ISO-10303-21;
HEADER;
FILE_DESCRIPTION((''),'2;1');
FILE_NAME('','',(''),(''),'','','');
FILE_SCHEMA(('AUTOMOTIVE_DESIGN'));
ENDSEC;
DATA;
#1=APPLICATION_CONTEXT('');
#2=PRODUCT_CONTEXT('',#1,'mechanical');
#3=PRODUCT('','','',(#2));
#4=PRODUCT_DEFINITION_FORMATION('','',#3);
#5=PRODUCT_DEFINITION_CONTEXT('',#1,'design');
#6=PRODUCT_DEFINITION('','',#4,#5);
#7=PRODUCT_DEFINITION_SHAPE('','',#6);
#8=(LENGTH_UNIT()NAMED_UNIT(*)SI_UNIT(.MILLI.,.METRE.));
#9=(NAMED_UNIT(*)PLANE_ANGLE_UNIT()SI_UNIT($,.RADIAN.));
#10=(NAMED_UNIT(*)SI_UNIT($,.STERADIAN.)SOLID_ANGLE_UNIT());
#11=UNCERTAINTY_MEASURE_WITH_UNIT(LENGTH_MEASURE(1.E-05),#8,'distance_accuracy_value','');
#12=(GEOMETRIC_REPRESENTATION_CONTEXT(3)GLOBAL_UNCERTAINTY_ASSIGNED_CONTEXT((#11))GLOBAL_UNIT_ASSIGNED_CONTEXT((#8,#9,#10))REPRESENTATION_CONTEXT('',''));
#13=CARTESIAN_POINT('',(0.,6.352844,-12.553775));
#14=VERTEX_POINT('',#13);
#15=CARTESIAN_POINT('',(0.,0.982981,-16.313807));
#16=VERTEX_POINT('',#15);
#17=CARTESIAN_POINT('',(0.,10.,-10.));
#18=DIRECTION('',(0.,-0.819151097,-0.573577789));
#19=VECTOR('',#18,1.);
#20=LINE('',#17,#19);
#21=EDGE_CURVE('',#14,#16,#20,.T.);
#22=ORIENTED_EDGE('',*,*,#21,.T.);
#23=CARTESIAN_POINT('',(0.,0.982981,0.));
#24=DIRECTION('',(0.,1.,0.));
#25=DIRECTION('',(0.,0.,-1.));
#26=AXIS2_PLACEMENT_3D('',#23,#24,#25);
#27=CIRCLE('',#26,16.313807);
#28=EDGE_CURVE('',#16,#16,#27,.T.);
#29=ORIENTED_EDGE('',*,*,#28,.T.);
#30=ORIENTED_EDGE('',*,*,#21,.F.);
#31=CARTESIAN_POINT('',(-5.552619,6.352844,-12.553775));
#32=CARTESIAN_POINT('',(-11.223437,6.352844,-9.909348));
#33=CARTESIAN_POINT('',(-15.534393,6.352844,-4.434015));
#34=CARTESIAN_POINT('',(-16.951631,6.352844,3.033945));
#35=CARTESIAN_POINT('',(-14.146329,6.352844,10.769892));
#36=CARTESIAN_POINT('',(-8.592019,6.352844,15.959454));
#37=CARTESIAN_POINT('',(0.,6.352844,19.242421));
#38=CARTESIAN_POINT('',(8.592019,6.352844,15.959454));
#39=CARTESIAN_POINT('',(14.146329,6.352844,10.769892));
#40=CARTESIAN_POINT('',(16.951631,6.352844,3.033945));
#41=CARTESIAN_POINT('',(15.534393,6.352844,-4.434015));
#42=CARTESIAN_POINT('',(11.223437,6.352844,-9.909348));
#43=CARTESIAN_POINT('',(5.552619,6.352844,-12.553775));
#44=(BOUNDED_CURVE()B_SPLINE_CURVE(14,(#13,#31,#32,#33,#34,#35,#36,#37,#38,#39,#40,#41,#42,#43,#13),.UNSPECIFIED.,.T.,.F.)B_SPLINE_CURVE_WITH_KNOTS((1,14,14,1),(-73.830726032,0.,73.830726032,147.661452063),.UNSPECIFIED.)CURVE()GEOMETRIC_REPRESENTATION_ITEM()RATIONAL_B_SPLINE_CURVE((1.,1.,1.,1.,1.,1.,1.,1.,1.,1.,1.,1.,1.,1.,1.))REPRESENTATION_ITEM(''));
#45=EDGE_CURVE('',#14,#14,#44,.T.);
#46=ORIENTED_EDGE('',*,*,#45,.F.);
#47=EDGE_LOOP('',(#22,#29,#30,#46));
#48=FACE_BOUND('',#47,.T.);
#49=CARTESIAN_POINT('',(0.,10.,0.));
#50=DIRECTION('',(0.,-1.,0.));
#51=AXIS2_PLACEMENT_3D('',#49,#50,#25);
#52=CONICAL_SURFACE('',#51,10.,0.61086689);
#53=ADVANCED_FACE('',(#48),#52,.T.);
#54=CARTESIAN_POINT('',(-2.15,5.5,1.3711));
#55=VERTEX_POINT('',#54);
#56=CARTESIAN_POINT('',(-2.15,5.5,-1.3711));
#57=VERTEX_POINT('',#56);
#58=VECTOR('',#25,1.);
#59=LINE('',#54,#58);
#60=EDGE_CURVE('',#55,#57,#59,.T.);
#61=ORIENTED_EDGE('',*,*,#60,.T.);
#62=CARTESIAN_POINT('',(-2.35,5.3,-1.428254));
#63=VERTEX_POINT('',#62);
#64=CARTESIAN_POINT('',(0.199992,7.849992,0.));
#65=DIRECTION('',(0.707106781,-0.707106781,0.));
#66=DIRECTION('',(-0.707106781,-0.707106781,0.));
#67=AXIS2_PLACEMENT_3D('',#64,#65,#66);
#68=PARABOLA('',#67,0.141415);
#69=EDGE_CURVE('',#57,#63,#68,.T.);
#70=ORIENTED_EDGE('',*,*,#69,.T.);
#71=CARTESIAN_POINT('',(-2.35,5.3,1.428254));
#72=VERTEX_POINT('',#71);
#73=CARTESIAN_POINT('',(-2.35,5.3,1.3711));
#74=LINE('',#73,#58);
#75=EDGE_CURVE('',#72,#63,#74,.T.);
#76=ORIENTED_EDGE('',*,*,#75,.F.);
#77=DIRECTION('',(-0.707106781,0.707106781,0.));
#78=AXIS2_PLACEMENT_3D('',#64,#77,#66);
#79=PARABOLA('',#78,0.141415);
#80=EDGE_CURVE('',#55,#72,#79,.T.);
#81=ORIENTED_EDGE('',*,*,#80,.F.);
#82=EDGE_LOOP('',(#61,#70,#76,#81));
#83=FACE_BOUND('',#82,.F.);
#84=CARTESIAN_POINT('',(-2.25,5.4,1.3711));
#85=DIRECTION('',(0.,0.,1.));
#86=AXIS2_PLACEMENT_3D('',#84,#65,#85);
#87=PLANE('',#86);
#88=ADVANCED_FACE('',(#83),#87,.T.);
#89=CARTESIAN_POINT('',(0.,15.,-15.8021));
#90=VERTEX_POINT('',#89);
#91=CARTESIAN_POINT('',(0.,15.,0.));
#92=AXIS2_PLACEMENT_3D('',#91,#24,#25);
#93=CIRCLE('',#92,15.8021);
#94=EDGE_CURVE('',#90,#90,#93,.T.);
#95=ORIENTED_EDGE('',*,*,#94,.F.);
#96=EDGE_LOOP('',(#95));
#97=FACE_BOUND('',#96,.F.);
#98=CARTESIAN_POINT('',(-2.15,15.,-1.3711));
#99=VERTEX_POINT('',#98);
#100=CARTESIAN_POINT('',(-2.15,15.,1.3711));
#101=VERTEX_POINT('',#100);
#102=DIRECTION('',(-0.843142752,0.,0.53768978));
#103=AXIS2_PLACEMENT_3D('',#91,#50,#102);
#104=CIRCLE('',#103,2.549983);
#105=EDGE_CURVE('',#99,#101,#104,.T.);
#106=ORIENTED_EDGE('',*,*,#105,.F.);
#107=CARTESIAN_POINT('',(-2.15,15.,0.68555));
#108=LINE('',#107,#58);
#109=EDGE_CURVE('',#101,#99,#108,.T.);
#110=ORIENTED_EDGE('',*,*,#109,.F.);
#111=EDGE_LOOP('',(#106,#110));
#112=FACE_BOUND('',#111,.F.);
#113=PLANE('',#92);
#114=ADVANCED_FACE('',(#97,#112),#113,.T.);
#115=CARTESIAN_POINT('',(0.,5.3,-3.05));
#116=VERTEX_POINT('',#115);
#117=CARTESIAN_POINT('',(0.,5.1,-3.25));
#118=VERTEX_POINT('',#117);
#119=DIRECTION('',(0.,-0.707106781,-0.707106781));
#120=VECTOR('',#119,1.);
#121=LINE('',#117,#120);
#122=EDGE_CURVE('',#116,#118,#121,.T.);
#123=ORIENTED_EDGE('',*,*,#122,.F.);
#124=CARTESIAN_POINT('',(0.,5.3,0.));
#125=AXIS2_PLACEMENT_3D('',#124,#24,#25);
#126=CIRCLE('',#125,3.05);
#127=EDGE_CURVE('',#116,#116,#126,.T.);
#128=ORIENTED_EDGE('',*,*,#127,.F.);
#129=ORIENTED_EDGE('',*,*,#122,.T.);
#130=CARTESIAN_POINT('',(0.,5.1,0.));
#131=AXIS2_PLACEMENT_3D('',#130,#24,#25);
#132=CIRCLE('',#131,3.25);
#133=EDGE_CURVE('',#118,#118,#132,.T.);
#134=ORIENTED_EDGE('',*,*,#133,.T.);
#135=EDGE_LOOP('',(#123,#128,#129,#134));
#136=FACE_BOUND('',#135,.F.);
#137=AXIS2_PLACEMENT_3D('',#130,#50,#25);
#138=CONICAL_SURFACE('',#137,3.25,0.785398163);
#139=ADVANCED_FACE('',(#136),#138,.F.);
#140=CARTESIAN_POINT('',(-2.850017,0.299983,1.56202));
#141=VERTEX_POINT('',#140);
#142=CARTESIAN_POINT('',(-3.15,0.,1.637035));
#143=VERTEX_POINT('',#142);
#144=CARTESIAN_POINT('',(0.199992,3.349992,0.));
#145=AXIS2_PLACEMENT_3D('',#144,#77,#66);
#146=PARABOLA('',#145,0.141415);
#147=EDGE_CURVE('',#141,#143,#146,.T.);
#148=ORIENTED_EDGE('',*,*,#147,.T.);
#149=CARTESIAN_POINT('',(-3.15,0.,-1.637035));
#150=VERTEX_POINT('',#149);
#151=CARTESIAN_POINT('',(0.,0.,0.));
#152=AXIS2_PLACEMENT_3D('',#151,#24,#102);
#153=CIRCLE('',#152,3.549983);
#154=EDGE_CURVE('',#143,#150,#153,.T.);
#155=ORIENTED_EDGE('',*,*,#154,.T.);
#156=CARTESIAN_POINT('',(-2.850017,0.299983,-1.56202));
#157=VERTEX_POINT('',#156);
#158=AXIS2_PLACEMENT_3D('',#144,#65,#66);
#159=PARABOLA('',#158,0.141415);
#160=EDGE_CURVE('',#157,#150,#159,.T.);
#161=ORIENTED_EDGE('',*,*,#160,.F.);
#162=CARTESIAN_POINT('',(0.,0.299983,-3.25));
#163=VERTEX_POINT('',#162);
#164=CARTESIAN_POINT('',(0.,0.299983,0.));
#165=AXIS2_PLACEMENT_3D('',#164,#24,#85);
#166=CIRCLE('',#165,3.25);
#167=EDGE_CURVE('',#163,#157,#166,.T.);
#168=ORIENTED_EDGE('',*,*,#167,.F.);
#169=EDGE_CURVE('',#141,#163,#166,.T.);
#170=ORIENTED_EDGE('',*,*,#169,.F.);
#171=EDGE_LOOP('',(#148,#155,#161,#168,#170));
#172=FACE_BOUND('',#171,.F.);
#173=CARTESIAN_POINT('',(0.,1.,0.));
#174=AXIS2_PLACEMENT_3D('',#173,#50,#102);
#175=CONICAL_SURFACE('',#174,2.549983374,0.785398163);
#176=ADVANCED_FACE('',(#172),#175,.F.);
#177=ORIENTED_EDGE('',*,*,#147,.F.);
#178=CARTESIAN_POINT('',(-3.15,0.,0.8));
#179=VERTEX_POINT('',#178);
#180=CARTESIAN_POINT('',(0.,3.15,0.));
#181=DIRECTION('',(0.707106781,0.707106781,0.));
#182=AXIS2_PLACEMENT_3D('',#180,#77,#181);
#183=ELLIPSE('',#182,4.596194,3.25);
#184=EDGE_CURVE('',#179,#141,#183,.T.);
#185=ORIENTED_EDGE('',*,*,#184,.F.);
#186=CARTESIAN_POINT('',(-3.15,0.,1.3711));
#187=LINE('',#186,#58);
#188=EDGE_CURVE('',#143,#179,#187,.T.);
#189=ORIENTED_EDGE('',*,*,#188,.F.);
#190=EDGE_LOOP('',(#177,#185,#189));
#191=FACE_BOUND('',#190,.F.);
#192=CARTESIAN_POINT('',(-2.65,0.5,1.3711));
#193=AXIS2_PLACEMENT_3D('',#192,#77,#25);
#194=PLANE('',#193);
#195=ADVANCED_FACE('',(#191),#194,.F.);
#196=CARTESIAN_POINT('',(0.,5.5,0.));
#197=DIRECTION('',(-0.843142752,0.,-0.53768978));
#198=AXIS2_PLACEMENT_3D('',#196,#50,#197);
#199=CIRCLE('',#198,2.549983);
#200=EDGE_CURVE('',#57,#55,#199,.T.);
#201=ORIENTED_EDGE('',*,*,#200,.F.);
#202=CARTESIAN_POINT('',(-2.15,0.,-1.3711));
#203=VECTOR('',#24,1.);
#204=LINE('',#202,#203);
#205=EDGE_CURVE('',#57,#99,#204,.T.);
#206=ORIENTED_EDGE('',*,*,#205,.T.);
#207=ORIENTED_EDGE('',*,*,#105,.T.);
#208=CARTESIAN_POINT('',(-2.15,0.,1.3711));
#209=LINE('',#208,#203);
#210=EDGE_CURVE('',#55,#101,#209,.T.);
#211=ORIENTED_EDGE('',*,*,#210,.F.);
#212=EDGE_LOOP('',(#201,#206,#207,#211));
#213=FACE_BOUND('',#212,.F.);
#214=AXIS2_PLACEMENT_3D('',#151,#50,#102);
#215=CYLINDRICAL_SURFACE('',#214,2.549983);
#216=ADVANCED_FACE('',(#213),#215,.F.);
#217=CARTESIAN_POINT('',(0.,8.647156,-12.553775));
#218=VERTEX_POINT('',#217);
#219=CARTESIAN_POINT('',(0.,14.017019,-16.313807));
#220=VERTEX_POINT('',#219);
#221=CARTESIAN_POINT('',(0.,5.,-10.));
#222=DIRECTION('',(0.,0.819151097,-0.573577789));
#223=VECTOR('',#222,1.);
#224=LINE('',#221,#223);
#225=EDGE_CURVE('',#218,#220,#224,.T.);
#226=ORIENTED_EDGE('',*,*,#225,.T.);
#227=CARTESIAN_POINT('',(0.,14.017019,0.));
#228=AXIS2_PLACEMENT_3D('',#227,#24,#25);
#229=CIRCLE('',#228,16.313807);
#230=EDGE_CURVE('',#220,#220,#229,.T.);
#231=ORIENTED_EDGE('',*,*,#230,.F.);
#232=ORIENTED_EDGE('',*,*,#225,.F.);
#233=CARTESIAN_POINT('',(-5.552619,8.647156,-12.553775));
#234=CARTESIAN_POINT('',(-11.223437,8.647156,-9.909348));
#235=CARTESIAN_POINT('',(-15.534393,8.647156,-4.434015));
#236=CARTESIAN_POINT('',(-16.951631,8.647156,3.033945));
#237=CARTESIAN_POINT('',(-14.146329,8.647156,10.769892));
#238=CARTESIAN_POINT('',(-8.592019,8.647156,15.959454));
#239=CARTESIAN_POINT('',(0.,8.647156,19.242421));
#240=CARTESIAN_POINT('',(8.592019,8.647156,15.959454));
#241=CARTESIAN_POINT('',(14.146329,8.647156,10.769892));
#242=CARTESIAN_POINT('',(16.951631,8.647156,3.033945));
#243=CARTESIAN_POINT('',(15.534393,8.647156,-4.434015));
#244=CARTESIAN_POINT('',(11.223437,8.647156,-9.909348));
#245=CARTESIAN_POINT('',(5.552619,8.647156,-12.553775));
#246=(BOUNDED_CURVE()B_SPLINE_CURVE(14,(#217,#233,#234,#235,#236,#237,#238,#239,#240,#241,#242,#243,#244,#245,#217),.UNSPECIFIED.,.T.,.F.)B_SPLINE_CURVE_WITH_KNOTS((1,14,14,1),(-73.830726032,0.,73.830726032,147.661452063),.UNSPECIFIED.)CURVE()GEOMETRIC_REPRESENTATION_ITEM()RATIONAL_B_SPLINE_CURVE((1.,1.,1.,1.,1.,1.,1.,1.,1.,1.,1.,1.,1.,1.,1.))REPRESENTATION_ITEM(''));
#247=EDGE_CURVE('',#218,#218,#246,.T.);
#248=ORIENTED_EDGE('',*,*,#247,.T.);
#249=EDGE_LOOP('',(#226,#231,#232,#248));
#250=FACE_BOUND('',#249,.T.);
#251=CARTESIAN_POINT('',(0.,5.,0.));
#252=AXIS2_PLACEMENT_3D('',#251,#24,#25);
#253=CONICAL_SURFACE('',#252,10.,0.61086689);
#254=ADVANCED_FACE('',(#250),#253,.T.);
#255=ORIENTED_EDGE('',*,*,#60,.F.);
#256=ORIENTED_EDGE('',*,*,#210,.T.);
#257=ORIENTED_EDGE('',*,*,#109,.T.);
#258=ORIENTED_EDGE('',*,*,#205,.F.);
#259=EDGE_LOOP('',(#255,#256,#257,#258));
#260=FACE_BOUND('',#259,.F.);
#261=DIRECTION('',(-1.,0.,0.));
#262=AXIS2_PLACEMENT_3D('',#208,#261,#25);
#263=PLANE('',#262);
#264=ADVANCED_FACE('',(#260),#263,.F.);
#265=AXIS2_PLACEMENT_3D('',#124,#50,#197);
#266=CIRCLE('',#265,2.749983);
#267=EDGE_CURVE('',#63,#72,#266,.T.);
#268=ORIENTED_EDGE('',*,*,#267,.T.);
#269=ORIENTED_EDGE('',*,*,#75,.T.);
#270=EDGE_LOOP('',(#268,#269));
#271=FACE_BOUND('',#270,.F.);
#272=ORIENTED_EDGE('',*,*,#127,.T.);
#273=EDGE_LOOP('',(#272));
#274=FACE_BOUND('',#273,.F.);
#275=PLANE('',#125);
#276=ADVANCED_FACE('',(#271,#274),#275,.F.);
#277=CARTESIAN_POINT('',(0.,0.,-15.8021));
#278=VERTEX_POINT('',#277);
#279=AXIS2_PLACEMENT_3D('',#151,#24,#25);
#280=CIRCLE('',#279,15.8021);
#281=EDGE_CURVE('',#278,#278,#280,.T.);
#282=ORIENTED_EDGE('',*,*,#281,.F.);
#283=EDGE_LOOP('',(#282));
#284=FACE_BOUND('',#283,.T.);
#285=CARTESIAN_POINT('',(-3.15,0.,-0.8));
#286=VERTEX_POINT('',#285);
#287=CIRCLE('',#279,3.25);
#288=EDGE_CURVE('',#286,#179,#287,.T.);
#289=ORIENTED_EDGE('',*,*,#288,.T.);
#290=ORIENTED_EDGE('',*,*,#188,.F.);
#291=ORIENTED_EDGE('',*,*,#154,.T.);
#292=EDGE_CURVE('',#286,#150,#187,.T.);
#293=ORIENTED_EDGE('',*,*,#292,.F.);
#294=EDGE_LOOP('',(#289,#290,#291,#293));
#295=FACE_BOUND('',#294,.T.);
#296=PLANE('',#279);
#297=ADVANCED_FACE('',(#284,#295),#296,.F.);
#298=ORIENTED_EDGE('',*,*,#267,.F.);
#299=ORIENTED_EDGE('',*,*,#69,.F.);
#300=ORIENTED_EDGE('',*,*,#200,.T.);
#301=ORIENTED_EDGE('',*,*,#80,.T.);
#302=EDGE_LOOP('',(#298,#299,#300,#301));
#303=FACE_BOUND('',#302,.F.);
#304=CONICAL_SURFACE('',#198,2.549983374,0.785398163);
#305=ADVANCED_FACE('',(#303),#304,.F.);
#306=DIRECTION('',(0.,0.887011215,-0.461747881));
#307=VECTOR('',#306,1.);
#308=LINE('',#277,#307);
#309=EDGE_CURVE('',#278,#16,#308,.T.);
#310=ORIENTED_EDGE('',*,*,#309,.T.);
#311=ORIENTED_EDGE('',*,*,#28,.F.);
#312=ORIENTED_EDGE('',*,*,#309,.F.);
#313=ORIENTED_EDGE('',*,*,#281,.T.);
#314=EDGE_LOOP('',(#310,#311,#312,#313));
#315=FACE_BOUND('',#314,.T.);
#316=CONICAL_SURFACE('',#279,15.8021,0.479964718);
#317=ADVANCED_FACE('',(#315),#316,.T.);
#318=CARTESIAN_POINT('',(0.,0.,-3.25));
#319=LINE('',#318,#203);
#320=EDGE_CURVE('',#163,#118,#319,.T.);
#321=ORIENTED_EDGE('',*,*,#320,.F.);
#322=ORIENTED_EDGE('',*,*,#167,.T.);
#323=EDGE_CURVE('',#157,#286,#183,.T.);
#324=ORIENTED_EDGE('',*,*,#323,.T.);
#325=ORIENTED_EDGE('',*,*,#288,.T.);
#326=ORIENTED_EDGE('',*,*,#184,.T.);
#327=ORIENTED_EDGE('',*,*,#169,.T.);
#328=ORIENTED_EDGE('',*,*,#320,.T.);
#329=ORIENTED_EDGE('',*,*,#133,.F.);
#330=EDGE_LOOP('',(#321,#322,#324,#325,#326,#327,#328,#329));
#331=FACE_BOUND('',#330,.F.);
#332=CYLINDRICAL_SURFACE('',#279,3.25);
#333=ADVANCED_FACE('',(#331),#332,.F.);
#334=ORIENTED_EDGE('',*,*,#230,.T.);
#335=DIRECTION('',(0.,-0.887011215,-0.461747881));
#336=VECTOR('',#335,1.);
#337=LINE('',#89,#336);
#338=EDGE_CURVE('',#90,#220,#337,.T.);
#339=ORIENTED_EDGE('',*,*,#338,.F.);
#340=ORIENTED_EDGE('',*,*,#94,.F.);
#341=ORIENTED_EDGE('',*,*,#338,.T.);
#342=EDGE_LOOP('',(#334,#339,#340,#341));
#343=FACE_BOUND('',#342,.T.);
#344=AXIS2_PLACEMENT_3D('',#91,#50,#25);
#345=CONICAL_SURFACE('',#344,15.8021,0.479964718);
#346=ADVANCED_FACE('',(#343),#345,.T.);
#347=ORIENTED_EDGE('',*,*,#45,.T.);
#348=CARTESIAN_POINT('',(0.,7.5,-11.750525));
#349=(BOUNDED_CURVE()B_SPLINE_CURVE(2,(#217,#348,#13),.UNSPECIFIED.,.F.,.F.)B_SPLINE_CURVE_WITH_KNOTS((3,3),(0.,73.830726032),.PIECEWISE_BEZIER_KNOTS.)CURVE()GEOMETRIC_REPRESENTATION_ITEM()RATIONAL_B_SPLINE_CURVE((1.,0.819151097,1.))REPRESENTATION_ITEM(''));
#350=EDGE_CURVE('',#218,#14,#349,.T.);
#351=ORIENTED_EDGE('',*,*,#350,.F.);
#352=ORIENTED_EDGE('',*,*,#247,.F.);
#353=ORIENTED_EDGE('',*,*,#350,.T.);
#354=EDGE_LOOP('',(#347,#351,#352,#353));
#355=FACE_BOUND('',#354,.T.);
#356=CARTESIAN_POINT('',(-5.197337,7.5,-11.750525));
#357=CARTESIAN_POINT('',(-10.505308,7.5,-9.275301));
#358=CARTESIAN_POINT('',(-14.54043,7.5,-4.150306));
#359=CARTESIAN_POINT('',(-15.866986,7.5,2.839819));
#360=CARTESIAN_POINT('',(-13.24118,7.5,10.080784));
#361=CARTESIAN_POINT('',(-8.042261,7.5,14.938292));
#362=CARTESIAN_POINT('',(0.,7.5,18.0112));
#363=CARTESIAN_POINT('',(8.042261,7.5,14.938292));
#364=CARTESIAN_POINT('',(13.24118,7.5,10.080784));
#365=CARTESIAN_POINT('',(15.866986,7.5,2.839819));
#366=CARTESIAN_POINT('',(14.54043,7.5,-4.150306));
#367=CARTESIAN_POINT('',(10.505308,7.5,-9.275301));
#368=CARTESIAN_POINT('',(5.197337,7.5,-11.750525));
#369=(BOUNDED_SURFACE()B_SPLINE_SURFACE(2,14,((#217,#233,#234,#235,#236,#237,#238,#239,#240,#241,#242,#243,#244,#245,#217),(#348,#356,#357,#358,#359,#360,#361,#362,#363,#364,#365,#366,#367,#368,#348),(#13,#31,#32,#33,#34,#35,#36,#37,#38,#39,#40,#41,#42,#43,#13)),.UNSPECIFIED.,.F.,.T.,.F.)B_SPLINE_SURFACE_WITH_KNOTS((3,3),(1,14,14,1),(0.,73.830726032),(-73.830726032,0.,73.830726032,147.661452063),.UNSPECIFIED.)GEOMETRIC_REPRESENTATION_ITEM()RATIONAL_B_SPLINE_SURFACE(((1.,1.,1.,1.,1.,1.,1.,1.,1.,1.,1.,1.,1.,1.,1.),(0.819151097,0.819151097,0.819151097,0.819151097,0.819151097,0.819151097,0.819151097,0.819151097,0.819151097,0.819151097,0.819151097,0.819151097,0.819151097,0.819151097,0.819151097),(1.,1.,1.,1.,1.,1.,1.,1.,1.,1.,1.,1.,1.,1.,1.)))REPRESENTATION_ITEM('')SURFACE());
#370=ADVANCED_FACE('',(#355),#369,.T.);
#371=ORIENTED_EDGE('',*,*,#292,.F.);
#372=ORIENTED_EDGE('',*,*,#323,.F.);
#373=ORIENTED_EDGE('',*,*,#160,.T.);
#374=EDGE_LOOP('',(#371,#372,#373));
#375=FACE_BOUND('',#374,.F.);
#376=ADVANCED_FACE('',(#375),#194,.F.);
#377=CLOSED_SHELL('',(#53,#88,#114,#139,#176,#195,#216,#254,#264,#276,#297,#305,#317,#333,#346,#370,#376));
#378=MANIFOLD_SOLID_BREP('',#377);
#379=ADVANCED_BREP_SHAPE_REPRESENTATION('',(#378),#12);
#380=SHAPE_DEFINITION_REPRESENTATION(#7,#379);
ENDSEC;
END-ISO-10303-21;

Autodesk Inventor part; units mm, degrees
ref_plane "YZ Plane" through (0, 0, 0) normal (1, 0, 0) x (0, 1, 0)
sketch "Sketch1" plane through (0, 0, 0) normal (0, 1, 0) x (-1, 0, 0)
  arc A0 (2.15, 1.3711) -> (2.15, -1.3711) centre (0, 0) ccw
  line L0 (2.15, 1.3711) -> (2.15, -1.3711)
  dimension "d1" = 4.7
  dimension "d92" = 2.55
sketch "Sketch2" plane through (0, 0, 0) normal (1, 0, 0) x (0, 1, 0)
  line L0 (0, 0) -> (15, 0)
  line L1 (15, 0) -> (15, -14)
  line L2 (0, 0) -> (0, -14)
  line L3 (5, -10) -> (15, -17.0021)
  line L4 (15, -14) -> (15, -17.0021)
  line L5 (7.5, 0) -> (7.5, -2.5713) construction
  line L6 (10, -10) -> (0, -17.0021)
  line L7 (0, -14) -> (0, -17.0021)
  point P0 (7.5, -11.7505)
  dimension "d4" = 15
  dimension "d5" = 14
  dimension "d6" = 14
  dimension "d93" = 10
  dimension "d102" = 55
  dimension "d103" = 10
revolve "Revolution1" add sketch "Sketch2" angle 360 about axis through (0, 0, 0) along (0, 1, 0)
extrude "Extrusion1" cut sketch "Sketch1" along normal through all
chamfer "Chamfer1" distance 1.2 angle 45 2 edges at (0, 15, 17.0021) (0, 0, 17.0021)
ref_plane "Work Plane3" through (-14.15, 0, 1.3711) normal (1, 0, 0) x (0, 0, -1)
ref_plane "Work Plane4" through (0, 7.5, 0) normal (0, -1, 0) x (1, 0, 0)
fillet "Fillet1" radius 2 1 edges at (0, 7.5, 11.7505)
chamfer "Chamfer2" distance 1 angle 45 2 edges at (-2.15, 0, 0) (2.55, 0, 0)
hole "Hole4" at (0, 0, 0) direction (0, 1, 0) diameter 6.5 depth 5.3
chamfer "Chamfer3" distance 0.2 angle 45 3 edges at (-2.15, 5.3, 0) (2.55, 5.3, 0) (0, 5.3, 3.25)
equation "\"d6\" = d5"
properties part number "Stepper Pulley V12_3DPrint"
